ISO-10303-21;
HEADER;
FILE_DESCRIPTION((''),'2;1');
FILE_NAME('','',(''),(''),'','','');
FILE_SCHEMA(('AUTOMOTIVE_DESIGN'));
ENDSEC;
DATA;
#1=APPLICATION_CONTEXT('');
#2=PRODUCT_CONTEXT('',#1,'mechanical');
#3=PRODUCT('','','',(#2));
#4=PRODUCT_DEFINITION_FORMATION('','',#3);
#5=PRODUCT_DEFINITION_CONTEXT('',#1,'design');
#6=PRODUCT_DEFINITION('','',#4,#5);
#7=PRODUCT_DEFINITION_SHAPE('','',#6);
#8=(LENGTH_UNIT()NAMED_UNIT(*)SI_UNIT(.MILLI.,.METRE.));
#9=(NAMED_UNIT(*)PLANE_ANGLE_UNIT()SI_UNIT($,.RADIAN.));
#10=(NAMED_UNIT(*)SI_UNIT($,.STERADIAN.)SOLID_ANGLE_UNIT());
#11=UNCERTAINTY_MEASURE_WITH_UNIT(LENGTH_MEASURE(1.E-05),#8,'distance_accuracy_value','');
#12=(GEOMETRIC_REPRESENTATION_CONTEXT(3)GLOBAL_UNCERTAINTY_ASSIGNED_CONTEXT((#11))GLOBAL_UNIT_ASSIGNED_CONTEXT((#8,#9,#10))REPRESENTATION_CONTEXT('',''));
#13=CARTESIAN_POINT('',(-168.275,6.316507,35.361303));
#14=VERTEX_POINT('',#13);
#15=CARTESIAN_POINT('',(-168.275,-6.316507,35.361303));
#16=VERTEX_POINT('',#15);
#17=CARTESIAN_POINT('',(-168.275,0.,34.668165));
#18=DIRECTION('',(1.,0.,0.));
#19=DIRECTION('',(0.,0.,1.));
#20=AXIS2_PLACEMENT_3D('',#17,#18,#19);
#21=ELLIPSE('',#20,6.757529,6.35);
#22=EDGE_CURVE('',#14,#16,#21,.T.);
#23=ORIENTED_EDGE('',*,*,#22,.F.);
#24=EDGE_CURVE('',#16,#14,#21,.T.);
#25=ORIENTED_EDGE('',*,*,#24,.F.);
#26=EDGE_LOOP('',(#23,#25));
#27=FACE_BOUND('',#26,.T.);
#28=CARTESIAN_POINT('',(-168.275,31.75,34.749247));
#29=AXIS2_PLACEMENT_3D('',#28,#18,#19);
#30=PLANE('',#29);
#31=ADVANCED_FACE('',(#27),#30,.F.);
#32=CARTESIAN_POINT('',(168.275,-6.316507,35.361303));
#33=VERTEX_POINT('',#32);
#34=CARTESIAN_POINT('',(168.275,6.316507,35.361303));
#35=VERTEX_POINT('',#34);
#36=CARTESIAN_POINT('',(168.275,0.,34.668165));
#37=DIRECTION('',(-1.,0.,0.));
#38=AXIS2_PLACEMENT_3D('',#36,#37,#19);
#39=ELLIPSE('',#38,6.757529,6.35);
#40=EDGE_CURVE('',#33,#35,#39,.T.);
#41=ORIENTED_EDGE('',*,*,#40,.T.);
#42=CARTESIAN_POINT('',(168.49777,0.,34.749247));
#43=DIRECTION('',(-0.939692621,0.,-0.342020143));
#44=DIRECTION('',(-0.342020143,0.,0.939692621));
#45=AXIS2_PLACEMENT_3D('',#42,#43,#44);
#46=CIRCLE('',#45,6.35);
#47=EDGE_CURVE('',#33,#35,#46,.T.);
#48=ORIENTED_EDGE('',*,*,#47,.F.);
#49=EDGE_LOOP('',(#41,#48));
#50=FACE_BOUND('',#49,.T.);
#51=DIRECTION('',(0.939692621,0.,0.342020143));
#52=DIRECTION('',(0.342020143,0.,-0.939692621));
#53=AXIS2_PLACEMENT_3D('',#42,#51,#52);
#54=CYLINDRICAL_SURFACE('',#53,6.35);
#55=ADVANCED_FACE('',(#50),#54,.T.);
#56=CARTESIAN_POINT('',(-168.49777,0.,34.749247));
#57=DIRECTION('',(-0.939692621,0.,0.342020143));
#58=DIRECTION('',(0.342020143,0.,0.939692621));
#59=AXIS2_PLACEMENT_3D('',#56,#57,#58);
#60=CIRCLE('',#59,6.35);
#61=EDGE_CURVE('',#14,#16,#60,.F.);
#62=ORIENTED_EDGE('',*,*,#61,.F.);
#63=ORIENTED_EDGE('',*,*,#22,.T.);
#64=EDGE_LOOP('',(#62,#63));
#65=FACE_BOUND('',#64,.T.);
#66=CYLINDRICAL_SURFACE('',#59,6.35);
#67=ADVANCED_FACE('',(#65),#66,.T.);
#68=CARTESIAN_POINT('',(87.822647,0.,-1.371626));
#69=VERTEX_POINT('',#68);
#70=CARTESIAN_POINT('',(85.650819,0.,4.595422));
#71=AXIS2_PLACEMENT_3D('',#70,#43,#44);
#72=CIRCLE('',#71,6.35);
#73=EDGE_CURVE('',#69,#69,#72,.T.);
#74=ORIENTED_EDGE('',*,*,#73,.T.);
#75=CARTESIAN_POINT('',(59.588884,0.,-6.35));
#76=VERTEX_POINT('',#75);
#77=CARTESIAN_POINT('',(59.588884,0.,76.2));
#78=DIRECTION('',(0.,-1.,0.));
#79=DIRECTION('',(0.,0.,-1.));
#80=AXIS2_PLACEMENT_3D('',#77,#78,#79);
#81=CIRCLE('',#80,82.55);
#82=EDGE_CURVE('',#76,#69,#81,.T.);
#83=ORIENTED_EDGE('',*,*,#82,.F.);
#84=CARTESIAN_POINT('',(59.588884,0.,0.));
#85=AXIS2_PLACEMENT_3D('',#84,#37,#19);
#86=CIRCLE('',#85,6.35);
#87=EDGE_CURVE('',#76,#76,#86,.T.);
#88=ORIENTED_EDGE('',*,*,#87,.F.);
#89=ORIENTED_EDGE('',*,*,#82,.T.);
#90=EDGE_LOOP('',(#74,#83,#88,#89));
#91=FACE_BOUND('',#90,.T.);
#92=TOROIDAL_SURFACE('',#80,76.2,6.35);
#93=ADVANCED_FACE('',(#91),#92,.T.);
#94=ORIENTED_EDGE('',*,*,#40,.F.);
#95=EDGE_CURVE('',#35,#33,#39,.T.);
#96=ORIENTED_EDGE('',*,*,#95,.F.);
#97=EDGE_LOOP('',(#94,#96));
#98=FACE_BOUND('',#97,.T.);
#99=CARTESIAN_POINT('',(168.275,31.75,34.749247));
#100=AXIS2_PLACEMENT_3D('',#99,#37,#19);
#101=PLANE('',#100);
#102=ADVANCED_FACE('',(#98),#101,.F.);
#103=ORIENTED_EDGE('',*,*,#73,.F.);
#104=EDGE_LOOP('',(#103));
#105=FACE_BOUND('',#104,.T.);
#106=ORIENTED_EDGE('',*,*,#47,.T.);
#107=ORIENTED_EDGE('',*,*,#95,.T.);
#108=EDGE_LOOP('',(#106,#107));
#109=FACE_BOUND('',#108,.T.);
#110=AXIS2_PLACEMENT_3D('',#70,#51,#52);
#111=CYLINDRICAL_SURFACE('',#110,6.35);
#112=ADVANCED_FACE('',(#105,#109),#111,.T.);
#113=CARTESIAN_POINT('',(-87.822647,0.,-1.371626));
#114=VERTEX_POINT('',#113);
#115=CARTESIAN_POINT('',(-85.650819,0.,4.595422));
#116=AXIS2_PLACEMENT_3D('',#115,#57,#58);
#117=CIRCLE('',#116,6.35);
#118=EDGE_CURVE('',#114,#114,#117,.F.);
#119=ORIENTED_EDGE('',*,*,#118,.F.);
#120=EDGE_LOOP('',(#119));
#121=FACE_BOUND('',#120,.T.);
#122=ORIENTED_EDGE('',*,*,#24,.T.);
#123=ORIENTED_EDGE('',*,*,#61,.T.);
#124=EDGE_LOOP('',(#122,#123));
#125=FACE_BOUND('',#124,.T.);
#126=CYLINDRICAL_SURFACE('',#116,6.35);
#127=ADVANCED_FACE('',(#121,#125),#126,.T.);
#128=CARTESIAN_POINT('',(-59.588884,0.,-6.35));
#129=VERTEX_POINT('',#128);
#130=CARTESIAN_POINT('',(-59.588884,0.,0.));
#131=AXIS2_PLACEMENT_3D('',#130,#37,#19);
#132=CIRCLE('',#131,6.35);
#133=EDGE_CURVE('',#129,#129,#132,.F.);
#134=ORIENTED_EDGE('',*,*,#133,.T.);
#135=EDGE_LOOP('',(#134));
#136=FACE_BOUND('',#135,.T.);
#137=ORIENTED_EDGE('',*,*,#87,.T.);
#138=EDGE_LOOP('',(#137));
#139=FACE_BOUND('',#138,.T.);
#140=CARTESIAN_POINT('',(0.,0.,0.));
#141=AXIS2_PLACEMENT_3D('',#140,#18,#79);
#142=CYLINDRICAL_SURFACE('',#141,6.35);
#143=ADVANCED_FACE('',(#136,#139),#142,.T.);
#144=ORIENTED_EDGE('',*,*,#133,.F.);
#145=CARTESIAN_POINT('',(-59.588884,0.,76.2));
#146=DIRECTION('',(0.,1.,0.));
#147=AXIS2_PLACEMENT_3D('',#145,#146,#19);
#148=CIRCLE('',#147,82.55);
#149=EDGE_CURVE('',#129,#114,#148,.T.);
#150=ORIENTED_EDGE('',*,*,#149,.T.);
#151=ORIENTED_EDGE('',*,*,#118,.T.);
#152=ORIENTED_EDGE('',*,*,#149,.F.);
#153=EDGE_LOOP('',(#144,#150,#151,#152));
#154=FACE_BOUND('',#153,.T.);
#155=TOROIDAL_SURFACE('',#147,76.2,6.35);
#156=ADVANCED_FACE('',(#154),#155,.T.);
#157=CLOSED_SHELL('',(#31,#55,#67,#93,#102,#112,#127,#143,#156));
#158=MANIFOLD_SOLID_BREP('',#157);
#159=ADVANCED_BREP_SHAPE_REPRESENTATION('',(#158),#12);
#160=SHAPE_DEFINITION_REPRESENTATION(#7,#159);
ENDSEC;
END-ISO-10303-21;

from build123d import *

# Parameters (mm, degrees)
SWEEP1_PROFILE_R     = 6.35
CUT_SWEEP2_START     = 168.275
CUT_SWEEP2_OUTLINE_W = 16
CUT_SWEEP2_OUTLINE_H = 42
CUT_SWEEP2_DEPTH     = 73.999175886


# Read off the part's stored shape, not the designer's step: Cut-Sweep2
with BuildPart() as part:
    # Sweep1: sweep along a path in Sketch1
    with BuildLine(Plane(origin=(0, 0, 0), x_dir=(1, 0, 0), z_dir=(0, 1, 0))) as sweep1_path:
        Line((0, 0), (59.58888407, 0))
        ThreePointArc((59.58888407, 0), (72.820875208, -1.15764922), (85.650818991, -4.595422296))
        Line((85.650818991, -4.595422296), (168.497770272, -34.749246562))
        Line((168.497770272, -34.749246562), (240.102347976, -60.811181483))
    # Sweep1 profile (on start of the path) → Sweep1 (sweep)
    with BuildSketch(Plane(origin=(0, 0, 0), x_dir=(0, 0, 1), z_dir=(1, 0, 0))):
        Circle(SWEEP1_PROFILE_R)
    sweep1 = sweep(path=sweep1_path.line)

    # Cut-Sweep2 outline → Cut-Sweep2 (cut)
    with BuildSketch(Plane.YZ.offset(CUT_SWEEP2_START)):
        with Locations((0, 47)):
            Rectangle(CUT_SWEEP2_OUTLINE_W, CUT_SWEEP2_OUTLINE_H)
    cut_sweep2 = extrude(amount=CUT_SWEEP2_DEPTH, mode=Mode.SUBTRACT)

    # Mirror1: Sweep1, Cut-Sweep2 across plane
    add(sweep1.mirror(Plane(origin=(0, 0, 0), x_dir=(0, 0, 1), z_dir=(1, 0, 0))))
    add(cut_sweep2.mirror(Plane(origin=(0, 0, 0), x_dir=(0, 0, 1), z_dir=(1, 0, 0))), mode=Mode.SUBTRACT)


solid = part.part
